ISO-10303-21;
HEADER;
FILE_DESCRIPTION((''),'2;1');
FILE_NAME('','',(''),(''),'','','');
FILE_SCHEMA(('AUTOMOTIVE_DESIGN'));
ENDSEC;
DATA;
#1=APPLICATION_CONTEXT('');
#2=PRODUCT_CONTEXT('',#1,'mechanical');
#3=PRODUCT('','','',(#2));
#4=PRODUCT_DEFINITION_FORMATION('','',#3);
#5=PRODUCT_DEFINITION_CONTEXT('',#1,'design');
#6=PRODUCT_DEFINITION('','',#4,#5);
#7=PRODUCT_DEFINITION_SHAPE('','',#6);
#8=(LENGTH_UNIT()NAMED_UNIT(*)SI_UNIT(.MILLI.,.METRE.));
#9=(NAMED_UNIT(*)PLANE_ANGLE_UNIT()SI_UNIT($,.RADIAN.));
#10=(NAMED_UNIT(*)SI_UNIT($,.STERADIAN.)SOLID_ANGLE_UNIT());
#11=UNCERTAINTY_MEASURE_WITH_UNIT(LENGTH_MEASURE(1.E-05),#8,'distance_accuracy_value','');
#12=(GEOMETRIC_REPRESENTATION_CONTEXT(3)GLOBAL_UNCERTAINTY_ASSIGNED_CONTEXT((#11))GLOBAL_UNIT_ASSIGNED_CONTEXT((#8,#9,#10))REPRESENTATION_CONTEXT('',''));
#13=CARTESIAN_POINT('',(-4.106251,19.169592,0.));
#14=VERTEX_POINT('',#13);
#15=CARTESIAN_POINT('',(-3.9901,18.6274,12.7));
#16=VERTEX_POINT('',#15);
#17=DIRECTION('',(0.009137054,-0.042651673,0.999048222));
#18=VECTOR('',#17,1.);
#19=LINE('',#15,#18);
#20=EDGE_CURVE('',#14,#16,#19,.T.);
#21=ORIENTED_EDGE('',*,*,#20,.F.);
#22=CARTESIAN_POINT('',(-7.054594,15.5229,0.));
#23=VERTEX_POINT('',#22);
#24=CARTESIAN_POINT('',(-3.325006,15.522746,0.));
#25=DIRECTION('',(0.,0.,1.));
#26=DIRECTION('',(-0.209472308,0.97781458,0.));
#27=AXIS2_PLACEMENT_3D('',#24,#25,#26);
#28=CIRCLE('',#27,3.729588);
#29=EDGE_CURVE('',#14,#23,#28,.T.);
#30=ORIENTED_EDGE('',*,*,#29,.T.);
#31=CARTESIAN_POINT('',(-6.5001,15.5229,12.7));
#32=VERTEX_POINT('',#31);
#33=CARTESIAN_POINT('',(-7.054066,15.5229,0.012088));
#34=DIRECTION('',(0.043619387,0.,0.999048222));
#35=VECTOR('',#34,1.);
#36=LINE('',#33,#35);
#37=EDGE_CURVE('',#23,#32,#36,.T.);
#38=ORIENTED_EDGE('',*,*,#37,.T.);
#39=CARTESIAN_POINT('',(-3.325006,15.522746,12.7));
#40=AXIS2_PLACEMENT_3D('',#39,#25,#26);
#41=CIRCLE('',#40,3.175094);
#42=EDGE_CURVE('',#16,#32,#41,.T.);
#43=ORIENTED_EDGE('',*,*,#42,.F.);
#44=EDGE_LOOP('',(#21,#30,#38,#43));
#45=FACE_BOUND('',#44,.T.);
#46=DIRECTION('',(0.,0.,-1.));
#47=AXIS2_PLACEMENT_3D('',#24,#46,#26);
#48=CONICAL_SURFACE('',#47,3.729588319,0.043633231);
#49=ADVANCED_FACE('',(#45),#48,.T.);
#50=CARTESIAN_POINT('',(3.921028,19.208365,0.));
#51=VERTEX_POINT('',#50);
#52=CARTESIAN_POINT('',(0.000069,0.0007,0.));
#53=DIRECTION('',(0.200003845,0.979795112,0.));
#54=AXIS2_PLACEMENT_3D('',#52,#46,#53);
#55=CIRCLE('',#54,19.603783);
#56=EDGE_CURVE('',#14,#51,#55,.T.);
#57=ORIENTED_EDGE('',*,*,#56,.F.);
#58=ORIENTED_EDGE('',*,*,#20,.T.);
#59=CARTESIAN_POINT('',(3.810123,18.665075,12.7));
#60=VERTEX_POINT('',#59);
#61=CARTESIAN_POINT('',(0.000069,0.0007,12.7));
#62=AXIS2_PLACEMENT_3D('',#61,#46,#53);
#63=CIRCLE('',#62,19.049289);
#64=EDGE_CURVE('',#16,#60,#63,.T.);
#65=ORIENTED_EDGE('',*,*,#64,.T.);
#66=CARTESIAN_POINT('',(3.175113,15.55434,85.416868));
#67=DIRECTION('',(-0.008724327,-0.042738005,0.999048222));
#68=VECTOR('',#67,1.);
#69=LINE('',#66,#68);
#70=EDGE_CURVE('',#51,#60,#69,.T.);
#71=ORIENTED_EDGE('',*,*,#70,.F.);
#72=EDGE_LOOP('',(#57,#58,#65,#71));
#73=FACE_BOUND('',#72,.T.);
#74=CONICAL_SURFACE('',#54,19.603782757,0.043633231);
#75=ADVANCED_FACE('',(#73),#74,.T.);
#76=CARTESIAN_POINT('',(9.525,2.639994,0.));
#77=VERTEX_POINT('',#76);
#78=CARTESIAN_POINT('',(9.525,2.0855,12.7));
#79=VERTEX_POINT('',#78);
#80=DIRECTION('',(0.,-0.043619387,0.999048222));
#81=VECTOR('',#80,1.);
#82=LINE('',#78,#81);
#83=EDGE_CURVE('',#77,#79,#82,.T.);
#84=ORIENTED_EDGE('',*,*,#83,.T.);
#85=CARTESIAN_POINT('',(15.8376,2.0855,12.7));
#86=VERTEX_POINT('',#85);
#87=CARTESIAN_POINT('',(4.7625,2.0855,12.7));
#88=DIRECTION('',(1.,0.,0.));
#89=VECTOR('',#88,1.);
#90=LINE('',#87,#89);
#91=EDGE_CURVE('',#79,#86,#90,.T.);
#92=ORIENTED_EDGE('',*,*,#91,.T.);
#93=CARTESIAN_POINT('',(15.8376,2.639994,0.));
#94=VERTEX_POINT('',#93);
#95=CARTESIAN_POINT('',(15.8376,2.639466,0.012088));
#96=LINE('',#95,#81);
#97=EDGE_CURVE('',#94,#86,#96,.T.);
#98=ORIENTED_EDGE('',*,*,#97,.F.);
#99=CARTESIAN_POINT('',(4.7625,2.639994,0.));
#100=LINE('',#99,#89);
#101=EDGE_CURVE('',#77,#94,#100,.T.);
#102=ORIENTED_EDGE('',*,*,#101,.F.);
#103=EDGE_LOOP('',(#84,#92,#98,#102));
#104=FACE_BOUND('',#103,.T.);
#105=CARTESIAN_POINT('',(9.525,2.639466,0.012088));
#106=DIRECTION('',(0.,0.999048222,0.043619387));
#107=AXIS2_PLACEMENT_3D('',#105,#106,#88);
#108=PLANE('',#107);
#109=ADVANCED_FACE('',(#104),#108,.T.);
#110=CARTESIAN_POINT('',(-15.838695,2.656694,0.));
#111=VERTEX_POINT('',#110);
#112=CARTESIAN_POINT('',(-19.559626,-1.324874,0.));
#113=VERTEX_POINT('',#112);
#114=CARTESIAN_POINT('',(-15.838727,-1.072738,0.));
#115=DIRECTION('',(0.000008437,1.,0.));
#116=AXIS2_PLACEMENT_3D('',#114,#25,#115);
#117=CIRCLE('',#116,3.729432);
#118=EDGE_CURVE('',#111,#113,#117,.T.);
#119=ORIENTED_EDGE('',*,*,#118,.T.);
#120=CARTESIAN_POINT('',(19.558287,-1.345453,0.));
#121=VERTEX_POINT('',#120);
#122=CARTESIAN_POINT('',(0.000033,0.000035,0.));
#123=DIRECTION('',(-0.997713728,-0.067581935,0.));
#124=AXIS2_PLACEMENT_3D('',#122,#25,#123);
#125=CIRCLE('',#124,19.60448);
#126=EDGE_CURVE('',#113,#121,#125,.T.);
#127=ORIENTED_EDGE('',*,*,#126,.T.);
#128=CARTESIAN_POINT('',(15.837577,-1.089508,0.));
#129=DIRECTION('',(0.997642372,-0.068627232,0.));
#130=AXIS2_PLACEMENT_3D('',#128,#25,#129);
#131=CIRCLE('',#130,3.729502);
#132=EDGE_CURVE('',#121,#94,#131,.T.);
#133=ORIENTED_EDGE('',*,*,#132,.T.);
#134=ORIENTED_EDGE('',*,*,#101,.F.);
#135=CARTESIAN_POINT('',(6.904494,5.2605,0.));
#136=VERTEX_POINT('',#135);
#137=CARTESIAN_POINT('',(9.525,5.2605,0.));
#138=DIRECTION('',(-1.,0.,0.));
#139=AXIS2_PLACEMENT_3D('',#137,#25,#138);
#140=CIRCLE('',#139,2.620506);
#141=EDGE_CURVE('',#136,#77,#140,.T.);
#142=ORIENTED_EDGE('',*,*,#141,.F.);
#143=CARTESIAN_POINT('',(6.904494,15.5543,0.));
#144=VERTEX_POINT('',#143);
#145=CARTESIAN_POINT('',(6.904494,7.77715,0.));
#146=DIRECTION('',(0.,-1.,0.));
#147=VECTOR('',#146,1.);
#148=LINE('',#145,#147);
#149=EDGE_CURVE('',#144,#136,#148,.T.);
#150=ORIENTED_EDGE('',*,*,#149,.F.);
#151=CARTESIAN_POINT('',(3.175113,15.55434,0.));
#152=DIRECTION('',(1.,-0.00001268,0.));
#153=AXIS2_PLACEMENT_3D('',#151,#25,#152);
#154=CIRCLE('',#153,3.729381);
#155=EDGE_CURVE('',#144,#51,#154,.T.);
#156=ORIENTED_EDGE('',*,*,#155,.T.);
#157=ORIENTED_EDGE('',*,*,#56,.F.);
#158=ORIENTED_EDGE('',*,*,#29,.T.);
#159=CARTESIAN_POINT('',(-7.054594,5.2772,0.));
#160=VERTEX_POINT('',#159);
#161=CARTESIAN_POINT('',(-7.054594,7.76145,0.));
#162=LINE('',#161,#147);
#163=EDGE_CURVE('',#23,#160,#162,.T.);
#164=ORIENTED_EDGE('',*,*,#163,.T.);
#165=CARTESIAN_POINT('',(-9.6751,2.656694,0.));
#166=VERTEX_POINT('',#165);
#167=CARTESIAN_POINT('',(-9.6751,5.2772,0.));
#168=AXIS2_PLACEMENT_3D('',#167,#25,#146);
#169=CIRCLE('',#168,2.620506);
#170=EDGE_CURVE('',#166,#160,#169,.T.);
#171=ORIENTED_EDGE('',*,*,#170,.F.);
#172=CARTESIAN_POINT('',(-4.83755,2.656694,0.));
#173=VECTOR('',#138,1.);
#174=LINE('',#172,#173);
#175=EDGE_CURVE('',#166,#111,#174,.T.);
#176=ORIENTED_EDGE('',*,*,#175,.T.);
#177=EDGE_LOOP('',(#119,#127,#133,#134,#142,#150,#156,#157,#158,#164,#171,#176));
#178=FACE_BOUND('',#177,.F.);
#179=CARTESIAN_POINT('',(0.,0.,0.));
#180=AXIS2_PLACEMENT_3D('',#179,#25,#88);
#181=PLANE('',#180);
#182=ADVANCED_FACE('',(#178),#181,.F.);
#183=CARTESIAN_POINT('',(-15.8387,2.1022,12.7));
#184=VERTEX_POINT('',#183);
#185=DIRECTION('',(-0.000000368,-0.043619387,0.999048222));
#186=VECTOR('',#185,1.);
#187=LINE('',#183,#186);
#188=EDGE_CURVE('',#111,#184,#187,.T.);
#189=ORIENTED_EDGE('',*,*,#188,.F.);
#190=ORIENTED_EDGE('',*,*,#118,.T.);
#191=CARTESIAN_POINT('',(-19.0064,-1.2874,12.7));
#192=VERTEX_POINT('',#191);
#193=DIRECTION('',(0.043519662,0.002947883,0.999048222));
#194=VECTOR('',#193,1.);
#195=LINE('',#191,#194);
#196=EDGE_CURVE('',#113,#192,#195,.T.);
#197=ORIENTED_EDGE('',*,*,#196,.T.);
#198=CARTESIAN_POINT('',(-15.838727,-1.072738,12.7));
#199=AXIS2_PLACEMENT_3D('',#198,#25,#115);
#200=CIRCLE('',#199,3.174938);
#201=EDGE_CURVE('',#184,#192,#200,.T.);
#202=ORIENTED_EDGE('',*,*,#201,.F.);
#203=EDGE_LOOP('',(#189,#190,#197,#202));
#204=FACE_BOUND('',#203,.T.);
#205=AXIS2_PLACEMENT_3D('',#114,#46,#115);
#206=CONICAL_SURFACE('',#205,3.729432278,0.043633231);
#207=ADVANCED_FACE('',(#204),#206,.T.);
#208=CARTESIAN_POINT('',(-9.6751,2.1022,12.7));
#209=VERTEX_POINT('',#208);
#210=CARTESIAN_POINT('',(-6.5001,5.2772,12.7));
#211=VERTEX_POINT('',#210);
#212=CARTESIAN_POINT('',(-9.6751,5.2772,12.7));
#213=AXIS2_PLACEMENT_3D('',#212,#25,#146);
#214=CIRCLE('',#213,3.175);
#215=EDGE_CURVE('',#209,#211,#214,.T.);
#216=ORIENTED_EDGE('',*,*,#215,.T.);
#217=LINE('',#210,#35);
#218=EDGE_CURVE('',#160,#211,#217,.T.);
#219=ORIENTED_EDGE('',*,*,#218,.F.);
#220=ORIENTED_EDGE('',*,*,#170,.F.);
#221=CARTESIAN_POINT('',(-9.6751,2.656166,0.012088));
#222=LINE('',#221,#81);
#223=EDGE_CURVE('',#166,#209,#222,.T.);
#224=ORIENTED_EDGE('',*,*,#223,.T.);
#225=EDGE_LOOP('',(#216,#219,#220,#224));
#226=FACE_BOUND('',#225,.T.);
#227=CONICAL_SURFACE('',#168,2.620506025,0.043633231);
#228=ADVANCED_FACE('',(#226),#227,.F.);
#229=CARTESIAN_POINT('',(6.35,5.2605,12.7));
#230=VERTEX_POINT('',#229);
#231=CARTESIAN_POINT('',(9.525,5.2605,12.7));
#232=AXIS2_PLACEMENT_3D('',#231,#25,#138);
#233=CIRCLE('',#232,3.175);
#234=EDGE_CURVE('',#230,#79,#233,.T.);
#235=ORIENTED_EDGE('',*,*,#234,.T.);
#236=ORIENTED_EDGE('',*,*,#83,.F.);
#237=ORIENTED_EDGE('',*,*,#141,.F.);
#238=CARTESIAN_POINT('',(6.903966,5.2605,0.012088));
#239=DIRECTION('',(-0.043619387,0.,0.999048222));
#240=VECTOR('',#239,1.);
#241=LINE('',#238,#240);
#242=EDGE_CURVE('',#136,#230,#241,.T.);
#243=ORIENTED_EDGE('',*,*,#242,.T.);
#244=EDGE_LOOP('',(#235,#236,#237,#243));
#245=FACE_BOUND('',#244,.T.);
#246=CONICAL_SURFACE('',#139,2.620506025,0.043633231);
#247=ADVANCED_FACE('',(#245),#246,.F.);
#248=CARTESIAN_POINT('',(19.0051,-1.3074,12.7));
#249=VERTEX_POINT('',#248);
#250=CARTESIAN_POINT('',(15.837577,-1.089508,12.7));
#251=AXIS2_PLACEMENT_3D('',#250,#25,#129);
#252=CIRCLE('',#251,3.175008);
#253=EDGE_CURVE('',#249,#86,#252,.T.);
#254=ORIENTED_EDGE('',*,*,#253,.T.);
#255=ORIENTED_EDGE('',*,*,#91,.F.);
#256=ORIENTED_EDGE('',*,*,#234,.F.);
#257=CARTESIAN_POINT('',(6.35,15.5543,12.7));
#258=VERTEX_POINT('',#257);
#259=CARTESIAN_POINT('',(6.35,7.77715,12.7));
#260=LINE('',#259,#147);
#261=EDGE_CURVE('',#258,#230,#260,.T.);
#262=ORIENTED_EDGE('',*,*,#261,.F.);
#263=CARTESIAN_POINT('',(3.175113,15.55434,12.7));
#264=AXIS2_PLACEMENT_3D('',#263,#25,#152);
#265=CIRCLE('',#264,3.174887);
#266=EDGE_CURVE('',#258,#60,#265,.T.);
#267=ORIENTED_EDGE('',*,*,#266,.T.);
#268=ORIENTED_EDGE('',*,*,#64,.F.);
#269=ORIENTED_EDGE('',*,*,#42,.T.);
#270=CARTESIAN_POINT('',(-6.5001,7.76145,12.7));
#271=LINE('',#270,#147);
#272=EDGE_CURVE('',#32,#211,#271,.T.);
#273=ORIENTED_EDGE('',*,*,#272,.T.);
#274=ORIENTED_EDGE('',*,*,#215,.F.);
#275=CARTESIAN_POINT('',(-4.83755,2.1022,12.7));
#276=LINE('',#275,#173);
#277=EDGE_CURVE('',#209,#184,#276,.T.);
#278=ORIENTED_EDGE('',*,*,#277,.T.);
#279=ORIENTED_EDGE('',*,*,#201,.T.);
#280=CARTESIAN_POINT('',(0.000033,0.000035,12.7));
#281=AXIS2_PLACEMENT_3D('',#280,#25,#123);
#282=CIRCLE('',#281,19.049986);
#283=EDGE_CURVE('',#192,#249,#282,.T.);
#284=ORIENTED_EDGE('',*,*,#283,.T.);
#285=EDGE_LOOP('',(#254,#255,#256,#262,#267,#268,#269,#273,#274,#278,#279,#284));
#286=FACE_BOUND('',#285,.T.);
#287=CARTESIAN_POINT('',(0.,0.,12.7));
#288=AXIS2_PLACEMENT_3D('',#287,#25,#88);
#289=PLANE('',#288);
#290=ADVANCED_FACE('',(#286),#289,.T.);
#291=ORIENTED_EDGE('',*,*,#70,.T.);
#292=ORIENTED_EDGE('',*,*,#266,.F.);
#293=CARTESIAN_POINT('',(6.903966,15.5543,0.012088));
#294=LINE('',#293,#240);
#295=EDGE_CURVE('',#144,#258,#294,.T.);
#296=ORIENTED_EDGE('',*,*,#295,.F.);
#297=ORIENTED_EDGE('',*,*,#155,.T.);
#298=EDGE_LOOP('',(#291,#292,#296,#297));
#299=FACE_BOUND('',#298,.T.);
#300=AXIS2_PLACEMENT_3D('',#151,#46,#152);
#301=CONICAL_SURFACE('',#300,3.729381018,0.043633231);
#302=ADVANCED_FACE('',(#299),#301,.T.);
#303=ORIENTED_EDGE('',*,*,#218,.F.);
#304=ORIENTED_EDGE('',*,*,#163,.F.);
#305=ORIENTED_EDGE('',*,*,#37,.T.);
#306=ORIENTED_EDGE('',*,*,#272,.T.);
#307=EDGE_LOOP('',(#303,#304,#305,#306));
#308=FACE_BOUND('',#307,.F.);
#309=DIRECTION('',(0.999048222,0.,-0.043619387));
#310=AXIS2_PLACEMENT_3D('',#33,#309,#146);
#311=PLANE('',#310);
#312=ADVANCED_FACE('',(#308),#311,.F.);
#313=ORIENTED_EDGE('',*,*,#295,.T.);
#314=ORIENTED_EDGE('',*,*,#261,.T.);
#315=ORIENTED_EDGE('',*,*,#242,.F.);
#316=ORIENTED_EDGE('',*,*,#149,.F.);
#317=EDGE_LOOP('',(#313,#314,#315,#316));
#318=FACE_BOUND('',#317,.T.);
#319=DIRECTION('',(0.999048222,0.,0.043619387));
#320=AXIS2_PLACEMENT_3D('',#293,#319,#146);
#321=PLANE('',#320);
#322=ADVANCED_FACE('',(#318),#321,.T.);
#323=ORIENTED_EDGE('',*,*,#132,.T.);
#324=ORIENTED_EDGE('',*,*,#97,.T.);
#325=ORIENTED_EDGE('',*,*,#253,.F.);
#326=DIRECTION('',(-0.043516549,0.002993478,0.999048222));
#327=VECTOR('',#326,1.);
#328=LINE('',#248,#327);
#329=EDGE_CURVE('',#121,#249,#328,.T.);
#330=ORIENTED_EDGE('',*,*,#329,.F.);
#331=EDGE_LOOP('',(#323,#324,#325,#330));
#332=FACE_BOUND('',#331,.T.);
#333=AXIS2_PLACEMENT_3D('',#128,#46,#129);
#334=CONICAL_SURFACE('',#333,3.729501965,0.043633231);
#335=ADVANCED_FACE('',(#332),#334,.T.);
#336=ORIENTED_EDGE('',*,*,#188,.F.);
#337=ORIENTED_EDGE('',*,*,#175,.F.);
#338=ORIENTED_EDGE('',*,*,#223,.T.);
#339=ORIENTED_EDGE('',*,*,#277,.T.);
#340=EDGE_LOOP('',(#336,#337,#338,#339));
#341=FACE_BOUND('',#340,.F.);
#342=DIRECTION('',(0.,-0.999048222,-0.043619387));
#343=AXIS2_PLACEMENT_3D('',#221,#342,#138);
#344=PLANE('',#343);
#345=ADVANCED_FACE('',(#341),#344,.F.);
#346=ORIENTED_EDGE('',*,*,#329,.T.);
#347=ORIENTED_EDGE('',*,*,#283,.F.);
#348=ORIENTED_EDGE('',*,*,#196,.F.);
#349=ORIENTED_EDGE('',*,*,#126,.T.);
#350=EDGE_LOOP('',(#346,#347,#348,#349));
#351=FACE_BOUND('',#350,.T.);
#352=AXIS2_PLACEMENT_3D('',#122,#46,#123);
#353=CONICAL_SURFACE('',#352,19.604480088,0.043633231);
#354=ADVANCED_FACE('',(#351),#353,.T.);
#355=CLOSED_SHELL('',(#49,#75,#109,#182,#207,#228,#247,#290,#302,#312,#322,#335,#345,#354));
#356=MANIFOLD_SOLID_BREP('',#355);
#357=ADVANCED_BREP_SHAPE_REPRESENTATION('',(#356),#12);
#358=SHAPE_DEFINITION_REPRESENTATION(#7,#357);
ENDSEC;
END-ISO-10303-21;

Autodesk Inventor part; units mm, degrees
ref_plane "YZ Plane" through (0, 0, 0) normal (1, 0, 0) x (0, 1, 0)
ref_plane "XZ Plane" through (0, 0, 0) normal (0, 1, 0) x (-1, 0, 0)
ref_plane "XY Plane" through (0, 0, 0) normal (0, 0, 1) x (1, 0, 0)
sketch "Sketch1" plane through (0, 0, 0) normal (0, 0, 1) x (1, 0, 0)
  circle A0 centre (0, 12.7) radius 3.175
  circle A1 centre (-0.0751, 0) radius 3.175
  line L0 (-0.0751, 0) -> (-0.0751, 19.0499)
  line L1 (-0.0751, 3.175) -> (-0.0751, 24.8386)
  line L2 (6.35, 15.5543) -> (6.35, 5.2605)
  line L3 (9.525, 2.0855) -> (15.8376, 2.0855)
  line L4 (-6.5001, 15.5229) -> (-6.5001, 5.2772)
  line L5 (-9.6751, 2.1022) -> (-15.8387, 2.1022)
  arc A2 (-19.0064, -1.2874) -> (19.0051, -1.3074) centre (0, 0) ccw
  arc A3 (3.81, 18.6651) -> (-3.9901, 18.6274) centre (0, 0) ccw
  arc A4 (-3.9901, 18.6274) -> (-6.5001, 15.5229) centre (-3.3251, 15.5229) ccw
  arc A5 (6.35, 15.5543) -> (3.81, 18.6651) centre (3.175, 15.5543) ccw
  arc A6 (6.35, 5.2605) -> (9.525, 2.0855) centre (9.525, 5.2605) ccw
  arc A7 (-9.6751, 2.1022) -> (-6.5001, 5.2772) centre (-9.6751, 5.2772) ccw
  arc A8 (-15.8387, 2.1022) -> (-19.0064, -1.2874) centre (-15.8387, -1.0728) ccw
  arc A9 (19.0051, -1.3074) -> (15.8376, 2.0855) centre (15.8376, -1.0895) ccw
  point P0 (6.35, 17.9605)
  point P1 (6.35, 2.0855)
  point P2 (18.9355, 2.0855)
  point P3 (-6.5001, 2.1022)
  point P4 (-18.9337, 2.1022)
  point P5 (-6.5001, 17.9067)
  dimension "d6" = 6.35
  dimension "d3" = 6.35
  dimension "d11" = 15.875
  dimension "d12" = 3.175
extrude "Extrusion1" add sketch "Sketch1" along normal blind 12.7 contours A0 L0 | L0 A0 | A1 | L2 A6 L3 A9 A2 A8 L5 A7 L4 A4 A3 A5
draft "FaceDraft1" angle 2.5 pull direction (0, 0, 1) faces at (6.35, 8.6918, 4.2333) (4.713, 18.3319, 8.4667) (6.5695, 4.1006, 8.4667) (2.9511, 18.82, 4.2333) (13.7334, 2.0855, 4.2333) (-6.0664, 17.1247, 8.4667) (16.3313, 2.0469, 8.4667) (-6.5001, 12.1076, 4.2333) (18.5791, -4.2093, 8.4667) (-7.8866, 2.6539, 8.4667) (-16.0862, 2.0925, 4.2333) (-11.7296, 2.1022, 4.2333) fixed edges at (6.35, 10.4074, 12.7) (5.6343, 17.5623, 12.7) (7.2799, 3.0154, 12.7) (-0.092, 19.0498, 12.7) (12.6813, 2.0855, 12.7) (-5.7941, 17.519, 12.7) (18.1584, 1.0772, 12.7) (-6.5001, 10.4, 12.7) (-0.01, -19.05, 12.7) (-7.43, 3.0321, 12.7) (-18.1584, 1.0951, 12.7) (-12.7569, 2.1022, 12.7)
properties part number "Crank Cast Image"
